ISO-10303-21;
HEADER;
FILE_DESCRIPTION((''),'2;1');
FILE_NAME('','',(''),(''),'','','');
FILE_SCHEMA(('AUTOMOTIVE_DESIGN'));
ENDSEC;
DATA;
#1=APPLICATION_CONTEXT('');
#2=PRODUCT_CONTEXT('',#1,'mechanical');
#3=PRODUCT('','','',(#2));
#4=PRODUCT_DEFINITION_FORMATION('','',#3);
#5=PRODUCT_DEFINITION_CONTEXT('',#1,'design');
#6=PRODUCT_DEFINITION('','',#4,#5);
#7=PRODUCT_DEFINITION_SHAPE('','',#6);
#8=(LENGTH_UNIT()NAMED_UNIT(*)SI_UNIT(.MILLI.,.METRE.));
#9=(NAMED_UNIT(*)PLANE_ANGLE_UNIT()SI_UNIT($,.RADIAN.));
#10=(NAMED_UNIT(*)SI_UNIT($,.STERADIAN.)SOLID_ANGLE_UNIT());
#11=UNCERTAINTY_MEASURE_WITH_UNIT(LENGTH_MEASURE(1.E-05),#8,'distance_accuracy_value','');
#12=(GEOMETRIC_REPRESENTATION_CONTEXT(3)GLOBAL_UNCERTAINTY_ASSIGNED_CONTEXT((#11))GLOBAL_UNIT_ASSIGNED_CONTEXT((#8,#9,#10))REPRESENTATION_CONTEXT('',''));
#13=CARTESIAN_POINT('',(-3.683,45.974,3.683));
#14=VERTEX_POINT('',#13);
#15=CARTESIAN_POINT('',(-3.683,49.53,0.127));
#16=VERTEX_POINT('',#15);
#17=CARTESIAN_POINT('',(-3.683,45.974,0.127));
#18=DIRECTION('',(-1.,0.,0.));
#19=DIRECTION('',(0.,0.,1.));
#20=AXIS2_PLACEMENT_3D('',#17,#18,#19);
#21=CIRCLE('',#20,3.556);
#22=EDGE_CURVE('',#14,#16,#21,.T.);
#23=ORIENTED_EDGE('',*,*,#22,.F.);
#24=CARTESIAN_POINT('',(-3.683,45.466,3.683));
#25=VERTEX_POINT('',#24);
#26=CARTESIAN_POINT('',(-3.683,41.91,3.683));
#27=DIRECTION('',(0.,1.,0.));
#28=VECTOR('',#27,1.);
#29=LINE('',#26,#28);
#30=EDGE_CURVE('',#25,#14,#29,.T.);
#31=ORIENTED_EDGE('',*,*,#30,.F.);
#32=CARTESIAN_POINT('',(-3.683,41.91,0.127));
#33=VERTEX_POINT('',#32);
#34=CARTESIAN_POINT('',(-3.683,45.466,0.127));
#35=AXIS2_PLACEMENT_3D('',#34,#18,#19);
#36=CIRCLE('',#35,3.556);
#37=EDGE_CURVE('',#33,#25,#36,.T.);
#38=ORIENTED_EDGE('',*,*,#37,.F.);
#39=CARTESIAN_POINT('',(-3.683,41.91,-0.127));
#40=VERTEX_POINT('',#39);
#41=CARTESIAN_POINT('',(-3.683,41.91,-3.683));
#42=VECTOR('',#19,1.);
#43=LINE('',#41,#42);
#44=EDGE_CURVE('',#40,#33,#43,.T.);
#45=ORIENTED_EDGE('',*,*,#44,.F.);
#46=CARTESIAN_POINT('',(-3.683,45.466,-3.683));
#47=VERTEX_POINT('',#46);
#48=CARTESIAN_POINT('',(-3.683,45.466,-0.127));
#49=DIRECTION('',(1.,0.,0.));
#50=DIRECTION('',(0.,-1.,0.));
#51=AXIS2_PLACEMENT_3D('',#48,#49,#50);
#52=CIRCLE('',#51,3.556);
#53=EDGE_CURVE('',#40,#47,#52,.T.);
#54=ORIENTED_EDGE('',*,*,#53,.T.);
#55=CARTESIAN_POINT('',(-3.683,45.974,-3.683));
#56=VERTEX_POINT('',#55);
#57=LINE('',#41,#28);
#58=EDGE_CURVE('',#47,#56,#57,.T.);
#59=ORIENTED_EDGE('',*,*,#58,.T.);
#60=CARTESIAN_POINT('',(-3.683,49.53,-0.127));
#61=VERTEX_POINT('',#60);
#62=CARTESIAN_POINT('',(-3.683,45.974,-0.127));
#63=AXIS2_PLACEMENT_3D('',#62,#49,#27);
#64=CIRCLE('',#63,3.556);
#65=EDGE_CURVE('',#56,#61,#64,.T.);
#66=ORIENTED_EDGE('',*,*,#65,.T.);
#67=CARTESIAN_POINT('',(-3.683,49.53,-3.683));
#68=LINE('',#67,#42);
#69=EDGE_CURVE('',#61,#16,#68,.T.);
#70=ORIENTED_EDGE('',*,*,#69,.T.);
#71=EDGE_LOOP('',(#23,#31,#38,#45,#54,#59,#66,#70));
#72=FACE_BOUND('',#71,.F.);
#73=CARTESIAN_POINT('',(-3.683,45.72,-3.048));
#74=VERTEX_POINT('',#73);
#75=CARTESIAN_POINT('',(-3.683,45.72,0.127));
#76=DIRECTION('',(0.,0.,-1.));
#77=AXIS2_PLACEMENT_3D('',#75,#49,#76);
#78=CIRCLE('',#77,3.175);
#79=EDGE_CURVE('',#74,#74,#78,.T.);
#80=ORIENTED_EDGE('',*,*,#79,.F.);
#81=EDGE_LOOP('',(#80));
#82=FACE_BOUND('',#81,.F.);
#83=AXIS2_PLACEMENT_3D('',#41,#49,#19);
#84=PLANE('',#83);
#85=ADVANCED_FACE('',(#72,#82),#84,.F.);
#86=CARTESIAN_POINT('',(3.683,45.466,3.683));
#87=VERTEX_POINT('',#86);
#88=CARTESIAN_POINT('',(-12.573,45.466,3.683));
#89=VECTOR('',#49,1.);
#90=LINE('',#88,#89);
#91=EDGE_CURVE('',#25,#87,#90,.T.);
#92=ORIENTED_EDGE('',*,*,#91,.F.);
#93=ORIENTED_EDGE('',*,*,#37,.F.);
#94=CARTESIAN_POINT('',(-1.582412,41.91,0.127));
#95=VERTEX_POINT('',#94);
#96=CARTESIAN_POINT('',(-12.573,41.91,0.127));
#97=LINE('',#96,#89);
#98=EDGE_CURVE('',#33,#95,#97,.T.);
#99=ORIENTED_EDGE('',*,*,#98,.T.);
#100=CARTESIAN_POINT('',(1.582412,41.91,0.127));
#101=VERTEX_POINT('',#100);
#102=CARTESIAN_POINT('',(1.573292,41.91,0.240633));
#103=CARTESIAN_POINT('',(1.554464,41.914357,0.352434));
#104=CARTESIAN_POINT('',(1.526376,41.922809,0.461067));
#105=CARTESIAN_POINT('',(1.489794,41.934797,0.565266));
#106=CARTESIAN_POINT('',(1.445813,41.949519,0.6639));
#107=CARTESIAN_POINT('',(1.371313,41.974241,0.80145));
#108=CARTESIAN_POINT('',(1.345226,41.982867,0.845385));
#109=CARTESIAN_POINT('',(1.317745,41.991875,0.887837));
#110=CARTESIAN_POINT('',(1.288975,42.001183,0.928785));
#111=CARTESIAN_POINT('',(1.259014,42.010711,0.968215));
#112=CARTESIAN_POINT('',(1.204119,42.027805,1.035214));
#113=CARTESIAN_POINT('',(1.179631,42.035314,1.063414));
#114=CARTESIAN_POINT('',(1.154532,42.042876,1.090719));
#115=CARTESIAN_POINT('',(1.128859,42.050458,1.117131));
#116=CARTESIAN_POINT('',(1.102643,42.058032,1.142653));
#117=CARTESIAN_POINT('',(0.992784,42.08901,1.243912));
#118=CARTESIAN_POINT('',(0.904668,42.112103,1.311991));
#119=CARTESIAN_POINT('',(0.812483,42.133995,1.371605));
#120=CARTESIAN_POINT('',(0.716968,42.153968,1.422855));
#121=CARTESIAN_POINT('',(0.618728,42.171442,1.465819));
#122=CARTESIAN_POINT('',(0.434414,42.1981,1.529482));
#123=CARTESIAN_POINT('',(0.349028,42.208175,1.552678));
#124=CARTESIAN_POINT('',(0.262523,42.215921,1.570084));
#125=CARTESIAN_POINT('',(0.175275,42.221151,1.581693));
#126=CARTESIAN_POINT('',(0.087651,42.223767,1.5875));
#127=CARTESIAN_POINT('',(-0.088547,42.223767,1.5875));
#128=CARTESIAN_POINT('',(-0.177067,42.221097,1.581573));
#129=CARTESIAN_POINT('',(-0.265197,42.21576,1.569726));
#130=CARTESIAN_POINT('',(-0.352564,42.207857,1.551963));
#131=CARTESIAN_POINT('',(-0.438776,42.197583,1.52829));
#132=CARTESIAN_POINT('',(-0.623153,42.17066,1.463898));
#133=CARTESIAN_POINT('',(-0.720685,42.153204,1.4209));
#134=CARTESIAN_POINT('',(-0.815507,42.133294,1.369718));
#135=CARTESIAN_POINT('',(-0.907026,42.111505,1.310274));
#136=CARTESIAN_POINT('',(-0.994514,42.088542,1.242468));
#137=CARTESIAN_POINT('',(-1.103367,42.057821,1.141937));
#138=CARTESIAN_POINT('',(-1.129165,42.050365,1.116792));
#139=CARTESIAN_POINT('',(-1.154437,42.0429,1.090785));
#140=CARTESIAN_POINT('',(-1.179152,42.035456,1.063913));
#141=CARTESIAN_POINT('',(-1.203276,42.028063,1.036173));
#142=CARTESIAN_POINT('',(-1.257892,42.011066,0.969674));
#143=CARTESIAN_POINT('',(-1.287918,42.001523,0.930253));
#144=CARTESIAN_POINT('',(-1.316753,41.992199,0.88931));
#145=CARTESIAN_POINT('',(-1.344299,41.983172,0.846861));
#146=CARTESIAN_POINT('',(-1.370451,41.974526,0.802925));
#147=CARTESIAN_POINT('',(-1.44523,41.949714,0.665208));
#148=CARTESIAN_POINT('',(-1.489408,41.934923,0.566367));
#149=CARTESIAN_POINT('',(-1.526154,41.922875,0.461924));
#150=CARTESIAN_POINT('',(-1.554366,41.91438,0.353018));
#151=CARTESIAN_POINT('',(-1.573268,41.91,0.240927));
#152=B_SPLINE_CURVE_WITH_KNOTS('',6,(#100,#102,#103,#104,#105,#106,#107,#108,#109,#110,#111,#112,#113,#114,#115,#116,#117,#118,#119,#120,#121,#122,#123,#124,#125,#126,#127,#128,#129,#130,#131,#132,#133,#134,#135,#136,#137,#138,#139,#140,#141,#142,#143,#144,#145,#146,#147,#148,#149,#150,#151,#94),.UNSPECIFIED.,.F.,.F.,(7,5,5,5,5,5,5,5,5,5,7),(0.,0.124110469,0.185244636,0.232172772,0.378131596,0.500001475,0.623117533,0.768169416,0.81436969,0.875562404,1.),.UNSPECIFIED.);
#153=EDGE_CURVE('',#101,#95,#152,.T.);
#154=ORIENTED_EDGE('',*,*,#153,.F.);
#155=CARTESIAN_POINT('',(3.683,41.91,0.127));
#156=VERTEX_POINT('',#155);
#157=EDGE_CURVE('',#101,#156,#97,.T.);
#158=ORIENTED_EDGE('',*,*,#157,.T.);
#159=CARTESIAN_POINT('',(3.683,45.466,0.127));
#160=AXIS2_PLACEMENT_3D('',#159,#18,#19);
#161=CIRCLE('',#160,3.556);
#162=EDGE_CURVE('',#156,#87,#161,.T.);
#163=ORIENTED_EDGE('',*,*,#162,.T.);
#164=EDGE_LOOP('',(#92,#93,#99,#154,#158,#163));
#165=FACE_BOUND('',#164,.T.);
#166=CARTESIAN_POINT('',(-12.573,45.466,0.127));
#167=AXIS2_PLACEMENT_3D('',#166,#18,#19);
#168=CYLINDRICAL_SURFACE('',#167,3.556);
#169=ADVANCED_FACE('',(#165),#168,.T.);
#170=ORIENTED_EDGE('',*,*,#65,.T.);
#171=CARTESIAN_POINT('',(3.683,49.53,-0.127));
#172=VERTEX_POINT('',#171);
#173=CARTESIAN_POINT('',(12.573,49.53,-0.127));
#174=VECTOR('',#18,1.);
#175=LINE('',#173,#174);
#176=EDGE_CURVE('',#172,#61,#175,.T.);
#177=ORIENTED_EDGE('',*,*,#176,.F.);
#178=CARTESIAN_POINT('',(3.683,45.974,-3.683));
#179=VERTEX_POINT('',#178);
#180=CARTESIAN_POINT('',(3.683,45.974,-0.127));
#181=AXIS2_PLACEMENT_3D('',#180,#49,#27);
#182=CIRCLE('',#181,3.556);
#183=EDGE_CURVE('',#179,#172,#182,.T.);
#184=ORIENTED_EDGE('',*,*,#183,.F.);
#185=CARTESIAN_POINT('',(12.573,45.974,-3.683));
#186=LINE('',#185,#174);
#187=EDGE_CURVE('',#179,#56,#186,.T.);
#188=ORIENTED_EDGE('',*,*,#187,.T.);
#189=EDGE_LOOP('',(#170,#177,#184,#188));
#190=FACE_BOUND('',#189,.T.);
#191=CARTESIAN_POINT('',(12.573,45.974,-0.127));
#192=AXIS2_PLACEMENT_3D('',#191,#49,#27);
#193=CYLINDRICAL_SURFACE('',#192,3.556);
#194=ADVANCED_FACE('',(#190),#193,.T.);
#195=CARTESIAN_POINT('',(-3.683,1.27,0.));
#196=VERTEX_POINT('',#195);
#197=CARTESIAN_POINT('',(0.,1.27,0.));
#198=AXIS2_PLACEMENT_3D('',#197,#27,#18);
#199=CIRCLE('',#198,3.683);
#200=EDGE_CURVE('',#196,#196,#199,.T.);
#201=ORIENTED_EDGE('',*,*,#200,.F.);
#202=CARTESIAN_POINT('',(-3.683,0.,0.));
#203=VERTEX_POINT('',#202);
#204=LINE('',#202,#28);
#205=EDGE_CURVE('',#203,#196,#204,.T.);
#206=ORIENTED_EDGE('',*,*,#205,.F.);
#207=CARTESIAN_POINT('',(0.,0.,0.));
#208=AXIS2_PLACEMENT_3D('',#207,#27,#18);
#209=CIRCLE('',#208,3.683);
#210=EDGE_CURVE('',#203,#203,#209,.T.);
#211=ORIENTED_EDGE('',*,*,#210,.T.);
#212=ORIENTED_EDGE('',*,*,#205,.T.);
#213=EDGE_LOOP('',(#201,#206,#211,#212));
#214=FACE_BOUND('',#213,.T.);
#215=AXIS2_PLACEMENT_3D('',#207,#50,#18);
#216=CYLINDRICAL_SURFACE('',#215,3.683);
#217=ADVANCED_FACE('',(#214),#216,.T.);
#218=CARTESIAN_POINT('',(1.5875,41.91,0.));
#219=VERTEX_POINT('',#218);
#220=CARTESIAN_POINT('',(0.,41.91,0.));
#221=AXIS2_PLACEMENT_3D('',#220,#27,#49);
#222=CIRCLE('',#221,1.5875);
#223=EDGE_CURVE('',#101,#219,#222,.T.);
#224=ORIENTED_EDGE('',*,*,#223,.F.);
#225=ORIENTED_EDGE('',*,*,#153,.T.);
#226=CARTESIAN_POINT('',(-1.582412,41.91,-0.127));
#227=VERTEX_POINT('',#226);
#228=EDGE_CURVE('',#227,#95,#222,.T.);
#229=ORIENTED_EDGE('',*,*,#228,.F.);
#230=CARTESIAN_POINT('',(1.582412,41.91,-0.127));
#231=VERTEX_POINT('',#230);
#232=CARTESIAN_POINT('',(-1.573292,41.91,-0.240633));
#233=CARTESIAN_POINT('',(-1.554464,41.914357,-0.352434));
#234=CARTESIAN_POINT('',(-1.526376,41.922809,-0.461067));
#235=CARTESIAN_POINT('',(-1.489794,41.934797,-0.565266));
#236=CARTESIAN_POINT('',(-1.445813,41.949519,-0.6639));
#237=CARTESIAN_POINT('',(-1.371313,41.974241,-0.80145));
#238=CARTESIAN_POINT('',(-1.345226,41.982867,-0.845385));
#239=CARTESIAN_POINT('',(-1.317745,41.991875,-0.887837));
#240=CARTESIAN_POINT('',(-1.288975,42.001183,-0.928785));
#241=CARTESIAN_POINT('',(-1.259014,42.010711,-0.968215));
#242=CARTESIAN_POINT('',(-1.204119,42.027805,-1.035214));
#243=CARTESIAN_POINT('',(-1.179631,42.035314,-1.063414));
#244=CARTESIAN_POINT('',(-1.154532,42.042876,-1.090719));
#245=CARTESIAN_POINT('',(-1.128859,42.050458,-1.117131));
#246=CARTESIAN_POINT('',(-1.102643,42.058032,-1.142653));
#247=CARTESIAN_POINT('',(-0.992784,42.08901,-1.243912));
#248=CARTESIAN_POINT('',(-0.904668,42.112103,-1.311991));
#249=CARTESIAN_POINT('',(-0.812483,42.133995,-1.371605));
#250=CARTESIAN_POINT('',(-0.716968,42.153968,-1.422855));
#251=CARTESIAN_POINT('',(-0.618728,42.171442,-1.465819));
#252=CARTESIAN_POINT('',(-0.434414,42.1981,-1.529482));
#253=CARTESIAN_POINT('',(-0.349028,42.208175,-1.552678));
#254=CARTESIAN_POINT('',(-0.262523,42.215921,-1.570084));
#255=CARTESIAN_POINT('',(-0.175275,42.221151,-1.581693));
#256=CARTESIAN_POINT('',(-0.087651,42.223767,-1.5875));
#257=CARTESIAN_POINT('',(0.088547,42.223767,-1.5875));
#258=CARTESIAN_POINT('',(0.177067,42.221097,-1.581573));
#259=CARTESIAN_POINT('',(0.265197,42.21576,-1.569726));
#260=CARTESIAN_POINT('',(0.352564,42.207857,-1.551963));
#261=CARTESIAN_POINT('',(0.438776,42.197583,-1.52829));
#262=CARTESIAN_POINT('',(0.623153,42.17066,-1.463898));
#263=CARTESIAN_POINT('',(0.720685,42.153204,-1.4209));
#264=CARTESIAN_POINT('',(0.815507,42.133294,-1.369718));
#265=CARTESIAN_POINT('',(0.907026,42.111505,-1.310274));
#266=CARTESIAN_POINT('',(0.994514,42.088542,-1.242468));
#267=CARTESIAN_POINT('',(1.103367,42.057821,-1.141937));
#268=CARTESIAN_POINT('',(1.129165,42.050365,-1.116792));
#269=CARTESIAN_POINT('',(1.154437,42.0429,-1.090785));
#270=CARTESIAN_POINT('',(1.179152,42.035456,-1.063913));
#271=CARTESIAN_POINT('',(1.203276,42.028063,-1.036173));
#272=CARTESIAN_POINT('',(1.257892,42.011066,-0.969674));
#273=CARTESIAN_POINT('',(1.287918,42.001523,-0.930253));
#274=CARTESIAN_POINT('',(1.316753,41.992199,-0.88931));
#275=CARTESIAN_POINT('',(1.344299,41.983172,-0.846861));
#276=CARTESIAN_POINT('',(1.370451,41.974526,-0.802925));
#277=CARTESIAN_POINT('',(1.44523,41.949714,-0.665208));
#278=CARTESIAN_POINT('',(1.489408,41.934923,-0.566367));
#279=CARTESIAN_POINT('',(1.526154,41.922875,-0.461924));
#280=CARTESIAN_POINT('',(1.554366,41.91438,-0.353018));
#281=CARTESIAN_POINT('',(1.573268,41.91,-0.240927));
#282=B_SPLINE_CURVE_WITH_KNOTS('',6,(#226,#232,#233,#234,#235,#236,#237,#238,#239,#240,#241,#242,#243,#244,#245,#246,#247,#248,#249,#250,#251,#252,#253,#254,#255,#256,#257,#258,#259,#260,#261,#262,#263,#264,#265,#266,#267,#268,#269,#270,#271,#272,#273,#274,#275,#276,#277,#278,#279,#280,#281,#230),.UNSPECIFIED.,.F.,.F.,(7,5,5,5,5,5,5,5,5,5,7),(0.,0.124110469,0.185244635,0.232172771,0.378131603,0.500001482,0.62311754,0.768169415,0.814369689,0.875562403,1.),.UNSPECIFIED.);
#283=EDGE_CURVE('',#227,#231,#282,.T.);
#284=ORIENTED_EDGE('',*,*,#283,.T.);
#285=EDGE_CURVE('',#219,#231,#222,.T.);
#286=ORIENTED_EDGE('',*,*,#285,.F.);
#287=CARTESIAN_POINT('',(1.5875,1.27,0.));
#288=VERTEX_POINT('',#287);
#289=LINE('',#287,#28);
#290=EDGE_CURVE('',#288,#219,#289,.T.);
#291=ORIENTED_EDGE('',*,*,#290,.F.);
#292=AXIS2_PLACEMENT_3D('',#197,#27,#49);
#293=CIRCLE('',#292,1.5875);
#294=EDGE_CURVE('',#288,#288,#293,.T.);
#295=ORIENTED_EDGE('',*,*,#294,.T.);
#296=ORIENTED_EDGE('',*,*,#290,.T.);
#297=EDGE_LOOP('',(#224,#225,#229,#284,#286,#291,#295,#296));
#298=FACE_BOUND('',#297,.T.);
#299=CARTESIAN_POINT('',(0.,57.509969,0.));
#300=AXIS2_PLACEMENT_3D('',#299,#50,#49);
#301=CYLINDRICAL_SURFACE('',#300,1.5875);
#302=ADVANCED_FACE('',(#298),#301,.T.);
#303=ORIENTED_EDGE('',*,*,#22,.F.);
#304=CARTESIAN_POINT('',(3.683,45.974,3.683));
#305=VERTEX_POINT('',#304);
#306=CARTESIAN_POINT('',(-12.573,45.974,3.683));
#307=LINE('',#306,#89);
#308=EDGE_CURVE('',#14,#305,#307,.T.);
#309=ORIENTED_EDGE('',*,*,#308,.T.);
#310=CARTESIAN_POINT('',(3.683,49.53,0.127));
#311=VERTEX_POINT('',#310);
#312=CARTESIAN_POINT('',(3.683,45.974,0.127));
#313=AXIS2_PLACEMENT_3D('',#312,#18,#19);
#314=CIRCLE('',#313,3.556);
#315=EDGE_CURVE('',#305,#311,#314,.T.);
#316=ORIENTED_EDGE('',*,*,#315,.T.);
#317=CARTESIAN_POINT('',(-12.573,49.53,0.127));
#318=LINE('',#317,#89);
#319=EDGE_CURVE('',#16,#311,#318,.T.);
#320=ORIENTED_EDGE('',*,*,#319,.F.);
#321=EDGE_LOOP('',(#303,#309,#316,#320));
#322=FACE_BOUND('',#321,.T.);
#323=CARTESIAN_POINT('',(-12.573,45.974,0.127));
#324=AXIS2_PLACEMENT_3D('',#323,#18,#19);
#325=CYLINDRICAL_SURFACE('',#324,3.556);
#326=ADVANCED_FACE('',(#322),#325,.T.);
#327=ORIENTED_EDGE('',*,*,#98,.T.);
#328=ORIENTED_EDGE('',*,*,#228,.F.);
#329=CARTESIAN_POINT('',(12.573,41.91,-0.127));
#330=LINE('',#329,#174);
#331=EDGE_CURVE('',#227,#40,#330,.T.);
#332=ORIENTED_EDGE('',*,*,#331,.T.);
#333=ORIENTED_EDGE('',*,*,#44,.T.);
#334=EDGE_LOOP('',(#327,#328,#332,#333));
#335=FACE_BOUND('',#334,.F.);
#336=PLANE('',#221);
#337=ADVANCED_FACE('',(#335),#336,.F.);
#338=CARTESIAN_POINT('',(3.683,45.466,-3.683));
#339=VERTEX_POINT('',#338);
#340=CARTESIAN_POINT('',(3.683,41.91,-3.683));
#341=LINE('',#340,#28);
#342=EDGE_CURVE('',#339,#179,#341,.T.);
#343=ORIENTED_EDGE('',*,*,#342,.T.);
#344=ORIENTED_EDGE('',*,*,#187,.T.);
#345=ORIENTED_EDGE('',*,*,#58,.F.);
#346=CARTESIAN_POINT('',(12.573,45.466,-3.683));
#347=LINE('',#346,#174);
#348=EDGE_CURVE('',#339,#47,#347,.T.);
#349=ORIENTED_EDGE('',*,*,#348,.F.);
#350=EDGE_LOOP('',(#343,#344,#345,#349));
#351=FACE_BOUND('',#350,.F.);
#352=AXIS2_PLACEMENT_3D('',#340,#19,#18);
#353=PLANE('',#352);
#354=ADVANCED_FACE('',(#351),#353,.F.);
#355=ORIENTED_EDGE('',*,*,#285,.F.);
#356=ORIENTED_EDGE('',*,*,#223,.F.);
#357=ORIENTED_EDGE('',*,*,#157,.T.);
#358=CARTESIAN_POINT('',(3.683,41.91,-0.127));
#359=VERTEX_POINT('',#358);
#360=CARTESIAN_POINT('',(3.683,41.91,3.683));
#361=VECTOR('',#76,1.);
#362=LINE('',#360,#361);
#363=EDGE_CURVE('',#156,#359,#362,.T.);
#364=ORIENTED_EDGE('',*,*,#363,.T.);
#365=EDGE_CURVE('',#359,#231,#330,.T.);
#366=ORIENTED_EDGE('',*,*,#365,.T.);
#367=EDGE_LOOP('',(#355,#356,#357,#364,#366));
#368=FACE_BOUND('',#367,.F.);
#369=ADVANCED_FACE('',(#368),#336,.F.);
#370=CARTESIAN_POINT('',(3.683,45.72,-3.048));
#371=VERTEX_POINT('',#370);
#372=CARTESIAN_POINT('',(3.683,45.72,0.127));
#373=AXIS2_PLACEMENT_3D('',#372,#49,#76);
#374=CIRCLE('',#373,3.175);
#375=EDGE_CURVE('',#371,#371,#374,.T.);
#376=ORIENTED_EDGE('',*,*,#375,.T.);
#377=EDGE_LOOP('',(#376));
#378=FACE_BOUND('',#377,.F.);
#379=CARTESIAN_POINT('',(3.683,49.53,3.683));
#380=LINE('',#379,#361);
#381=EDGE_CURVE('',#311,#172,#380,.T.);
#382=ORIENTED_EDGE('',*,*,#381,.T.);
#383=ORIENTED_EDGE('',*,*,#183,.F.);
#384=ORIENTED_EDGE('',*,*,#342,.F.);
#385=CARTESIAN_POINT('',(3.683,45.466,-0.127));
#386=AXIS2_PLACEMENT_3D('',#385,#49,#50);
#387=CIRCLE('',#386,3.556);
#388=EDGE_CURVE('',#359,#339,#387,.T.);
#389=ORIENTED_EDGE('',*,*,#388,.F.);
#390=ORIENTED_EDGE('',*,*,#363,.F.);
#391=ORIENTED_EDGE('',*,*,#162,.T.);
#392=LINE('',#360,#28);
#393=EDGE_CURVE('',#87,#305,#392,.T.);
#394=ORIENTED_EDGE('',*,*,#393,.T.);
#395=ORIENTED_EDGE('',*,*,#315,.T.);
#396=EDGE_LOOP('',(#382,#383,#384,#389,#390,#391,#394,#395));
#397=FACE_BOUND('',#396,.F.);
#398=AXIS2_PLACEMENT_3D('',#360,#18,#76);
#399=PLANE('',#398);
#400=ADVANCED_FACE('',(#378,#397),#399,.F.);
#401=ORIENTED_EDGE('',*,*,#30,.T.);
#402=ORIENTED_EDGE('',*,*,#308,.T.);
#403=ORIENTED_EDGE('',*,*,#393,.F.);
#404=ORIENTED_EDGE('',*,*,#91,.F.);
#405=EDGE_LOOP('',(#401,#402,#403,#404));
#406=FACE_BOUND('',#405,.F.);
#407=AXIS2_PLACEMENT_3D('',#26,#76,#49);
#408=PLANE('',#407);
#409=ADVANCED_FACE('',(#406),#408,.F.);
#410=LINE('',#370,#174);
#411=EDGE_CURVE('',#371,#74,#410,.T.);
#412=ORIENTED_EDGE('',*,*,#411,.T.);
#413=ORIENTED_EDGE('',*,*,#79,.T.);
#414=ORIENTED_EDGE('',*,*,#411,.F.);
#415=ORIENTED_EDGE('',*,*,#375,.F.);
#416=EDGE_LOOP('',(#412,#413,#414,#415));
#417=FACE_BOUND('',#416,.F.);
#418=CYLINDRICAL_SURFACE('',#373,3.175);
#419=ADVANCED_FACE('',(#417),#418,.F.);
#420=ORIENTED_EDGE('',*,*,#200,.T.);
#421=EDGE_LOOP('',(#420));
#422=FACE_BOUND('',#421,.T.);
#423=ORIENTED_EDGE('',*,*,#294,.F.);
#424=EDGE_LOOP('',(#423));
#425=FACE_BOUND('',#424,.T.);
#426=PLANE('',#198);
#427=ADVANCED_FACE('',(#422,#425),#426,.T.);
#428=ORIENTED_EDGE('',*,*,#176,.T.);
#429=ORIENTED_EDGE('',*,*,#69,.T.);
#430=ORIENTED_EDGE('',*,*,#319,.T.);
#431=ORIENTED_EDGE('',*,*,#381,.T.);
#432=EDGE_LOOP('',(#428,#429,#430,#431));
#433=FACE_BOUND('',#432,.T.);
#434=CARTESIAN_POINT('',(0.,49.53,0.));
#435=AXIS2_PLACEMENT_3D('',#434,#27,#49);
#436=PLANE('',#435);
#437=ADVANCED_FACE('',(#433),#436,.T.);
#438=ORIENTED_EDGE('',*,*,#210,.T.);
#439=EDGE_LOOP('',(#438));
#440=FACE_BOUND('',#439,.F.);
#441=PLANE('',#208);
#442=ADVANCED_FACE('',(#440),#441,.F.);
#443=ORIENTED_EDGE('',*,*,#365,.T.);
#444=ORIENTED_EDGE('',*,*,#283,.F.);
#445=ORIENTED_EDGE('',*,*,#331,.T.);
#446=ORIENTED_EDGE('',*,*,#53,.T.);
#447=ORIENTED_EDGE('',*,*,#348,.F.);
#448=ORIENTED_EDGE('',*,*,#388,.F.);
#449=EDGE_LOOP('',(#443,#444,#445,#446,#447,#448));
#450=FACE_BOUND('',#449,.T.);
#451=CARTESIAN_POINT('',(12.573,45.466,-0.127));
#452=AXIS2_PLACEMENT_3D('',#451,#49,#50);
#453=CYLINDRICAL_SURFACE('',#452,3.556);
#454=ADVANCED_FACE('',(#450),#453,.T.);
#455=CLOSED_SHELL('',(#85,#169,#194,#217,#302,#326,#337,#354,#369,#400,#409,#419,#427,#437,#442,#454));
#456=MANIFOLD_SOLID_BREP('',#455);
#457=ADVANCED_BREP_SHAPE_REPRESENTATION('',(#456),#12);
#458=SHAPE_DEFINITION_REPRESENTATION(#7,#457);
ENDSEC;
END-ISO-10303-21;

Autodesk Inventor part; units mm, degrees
ref_plane "YZ Plane" through (0, 0, 0) normal (1, 0, 0) x (0, 1, 0)
ref_plane "XZ Plane" through (0, 0, 0) normal (0, 1, 0) x (-1, 0, 0)
ref_plane "XY Plane" through (0, 0, 0) normal (0, 0, 1) x (1, 0, 0)
sketch "Sketch1" plane through (0, 0, 0) normal (0, 1, 0) x (-1, 0, 0)
  circle A0 centre (0, 0) radius 3.683
  dimension "d0" = 7.366
extrude "Extrusion1" add sketch "Sketch1" along normal blind 1.27
sketch "Sketch2" plane through (0, 1.27, 0) normal (0, 1, 0) x (1, 0, 0)
  circle A0 centre (0, 0) radius 1.5875
  dimension "d3" = 3.175
extrude "Extrusion2" add sketch "Sketch2" along normal blind 40.64
sketch "Sketch3" plane through (0, 41.91, 0) normal (0, 1, 0) x (1, 0, 0)
  line L0 (3.683, 3.683) -> (-3.683, 3.683)
  line L1 (-3.683, 3.683) -> (-3.683, -3.683)
  line L2 (-3.683, -3.683) -> (3.683, -3.683)
  line L3 (3.683, -3.683) -> (3.683, 3.683)
  line L4 (3.683, 3.683) -> (-3.683, -3.683) construction
  line L5 (-3.683, 3.683) -> (3.683, -3.683) construction
  point P0 (0, 0)
extrude "Extrusion3" add sketch "Sketch3" along normal blind 7.62
sketch "Sketch4" plane through (3.683, 41.91, 3.683) normal (1, 0, 0) x (0, 0, -1)
  circle A0 centre (3.556, 3.81) radius 3.175
  line L0 (7.366, 7.62) -> (0, 7.62) projected
  line L1 (7.366, 0) -> (7.366, 7.62) projected
  point P0 (3.683, -41.91)
  dimension "d8" = 3.81
  dimension "d9" = 3.81
  dimension "d10" = 6.35
extrude "Extrusion4" cut sketch "Sketch4" against normal blind 7.62
fillet "Fillet1" radius 3.556 4 edges at (0, 41.91, 3.683) (0, 49.53, 3.683) (0, 49.53, -3.683) (0, 41.91, -3.683)
properties part number "piston2"
